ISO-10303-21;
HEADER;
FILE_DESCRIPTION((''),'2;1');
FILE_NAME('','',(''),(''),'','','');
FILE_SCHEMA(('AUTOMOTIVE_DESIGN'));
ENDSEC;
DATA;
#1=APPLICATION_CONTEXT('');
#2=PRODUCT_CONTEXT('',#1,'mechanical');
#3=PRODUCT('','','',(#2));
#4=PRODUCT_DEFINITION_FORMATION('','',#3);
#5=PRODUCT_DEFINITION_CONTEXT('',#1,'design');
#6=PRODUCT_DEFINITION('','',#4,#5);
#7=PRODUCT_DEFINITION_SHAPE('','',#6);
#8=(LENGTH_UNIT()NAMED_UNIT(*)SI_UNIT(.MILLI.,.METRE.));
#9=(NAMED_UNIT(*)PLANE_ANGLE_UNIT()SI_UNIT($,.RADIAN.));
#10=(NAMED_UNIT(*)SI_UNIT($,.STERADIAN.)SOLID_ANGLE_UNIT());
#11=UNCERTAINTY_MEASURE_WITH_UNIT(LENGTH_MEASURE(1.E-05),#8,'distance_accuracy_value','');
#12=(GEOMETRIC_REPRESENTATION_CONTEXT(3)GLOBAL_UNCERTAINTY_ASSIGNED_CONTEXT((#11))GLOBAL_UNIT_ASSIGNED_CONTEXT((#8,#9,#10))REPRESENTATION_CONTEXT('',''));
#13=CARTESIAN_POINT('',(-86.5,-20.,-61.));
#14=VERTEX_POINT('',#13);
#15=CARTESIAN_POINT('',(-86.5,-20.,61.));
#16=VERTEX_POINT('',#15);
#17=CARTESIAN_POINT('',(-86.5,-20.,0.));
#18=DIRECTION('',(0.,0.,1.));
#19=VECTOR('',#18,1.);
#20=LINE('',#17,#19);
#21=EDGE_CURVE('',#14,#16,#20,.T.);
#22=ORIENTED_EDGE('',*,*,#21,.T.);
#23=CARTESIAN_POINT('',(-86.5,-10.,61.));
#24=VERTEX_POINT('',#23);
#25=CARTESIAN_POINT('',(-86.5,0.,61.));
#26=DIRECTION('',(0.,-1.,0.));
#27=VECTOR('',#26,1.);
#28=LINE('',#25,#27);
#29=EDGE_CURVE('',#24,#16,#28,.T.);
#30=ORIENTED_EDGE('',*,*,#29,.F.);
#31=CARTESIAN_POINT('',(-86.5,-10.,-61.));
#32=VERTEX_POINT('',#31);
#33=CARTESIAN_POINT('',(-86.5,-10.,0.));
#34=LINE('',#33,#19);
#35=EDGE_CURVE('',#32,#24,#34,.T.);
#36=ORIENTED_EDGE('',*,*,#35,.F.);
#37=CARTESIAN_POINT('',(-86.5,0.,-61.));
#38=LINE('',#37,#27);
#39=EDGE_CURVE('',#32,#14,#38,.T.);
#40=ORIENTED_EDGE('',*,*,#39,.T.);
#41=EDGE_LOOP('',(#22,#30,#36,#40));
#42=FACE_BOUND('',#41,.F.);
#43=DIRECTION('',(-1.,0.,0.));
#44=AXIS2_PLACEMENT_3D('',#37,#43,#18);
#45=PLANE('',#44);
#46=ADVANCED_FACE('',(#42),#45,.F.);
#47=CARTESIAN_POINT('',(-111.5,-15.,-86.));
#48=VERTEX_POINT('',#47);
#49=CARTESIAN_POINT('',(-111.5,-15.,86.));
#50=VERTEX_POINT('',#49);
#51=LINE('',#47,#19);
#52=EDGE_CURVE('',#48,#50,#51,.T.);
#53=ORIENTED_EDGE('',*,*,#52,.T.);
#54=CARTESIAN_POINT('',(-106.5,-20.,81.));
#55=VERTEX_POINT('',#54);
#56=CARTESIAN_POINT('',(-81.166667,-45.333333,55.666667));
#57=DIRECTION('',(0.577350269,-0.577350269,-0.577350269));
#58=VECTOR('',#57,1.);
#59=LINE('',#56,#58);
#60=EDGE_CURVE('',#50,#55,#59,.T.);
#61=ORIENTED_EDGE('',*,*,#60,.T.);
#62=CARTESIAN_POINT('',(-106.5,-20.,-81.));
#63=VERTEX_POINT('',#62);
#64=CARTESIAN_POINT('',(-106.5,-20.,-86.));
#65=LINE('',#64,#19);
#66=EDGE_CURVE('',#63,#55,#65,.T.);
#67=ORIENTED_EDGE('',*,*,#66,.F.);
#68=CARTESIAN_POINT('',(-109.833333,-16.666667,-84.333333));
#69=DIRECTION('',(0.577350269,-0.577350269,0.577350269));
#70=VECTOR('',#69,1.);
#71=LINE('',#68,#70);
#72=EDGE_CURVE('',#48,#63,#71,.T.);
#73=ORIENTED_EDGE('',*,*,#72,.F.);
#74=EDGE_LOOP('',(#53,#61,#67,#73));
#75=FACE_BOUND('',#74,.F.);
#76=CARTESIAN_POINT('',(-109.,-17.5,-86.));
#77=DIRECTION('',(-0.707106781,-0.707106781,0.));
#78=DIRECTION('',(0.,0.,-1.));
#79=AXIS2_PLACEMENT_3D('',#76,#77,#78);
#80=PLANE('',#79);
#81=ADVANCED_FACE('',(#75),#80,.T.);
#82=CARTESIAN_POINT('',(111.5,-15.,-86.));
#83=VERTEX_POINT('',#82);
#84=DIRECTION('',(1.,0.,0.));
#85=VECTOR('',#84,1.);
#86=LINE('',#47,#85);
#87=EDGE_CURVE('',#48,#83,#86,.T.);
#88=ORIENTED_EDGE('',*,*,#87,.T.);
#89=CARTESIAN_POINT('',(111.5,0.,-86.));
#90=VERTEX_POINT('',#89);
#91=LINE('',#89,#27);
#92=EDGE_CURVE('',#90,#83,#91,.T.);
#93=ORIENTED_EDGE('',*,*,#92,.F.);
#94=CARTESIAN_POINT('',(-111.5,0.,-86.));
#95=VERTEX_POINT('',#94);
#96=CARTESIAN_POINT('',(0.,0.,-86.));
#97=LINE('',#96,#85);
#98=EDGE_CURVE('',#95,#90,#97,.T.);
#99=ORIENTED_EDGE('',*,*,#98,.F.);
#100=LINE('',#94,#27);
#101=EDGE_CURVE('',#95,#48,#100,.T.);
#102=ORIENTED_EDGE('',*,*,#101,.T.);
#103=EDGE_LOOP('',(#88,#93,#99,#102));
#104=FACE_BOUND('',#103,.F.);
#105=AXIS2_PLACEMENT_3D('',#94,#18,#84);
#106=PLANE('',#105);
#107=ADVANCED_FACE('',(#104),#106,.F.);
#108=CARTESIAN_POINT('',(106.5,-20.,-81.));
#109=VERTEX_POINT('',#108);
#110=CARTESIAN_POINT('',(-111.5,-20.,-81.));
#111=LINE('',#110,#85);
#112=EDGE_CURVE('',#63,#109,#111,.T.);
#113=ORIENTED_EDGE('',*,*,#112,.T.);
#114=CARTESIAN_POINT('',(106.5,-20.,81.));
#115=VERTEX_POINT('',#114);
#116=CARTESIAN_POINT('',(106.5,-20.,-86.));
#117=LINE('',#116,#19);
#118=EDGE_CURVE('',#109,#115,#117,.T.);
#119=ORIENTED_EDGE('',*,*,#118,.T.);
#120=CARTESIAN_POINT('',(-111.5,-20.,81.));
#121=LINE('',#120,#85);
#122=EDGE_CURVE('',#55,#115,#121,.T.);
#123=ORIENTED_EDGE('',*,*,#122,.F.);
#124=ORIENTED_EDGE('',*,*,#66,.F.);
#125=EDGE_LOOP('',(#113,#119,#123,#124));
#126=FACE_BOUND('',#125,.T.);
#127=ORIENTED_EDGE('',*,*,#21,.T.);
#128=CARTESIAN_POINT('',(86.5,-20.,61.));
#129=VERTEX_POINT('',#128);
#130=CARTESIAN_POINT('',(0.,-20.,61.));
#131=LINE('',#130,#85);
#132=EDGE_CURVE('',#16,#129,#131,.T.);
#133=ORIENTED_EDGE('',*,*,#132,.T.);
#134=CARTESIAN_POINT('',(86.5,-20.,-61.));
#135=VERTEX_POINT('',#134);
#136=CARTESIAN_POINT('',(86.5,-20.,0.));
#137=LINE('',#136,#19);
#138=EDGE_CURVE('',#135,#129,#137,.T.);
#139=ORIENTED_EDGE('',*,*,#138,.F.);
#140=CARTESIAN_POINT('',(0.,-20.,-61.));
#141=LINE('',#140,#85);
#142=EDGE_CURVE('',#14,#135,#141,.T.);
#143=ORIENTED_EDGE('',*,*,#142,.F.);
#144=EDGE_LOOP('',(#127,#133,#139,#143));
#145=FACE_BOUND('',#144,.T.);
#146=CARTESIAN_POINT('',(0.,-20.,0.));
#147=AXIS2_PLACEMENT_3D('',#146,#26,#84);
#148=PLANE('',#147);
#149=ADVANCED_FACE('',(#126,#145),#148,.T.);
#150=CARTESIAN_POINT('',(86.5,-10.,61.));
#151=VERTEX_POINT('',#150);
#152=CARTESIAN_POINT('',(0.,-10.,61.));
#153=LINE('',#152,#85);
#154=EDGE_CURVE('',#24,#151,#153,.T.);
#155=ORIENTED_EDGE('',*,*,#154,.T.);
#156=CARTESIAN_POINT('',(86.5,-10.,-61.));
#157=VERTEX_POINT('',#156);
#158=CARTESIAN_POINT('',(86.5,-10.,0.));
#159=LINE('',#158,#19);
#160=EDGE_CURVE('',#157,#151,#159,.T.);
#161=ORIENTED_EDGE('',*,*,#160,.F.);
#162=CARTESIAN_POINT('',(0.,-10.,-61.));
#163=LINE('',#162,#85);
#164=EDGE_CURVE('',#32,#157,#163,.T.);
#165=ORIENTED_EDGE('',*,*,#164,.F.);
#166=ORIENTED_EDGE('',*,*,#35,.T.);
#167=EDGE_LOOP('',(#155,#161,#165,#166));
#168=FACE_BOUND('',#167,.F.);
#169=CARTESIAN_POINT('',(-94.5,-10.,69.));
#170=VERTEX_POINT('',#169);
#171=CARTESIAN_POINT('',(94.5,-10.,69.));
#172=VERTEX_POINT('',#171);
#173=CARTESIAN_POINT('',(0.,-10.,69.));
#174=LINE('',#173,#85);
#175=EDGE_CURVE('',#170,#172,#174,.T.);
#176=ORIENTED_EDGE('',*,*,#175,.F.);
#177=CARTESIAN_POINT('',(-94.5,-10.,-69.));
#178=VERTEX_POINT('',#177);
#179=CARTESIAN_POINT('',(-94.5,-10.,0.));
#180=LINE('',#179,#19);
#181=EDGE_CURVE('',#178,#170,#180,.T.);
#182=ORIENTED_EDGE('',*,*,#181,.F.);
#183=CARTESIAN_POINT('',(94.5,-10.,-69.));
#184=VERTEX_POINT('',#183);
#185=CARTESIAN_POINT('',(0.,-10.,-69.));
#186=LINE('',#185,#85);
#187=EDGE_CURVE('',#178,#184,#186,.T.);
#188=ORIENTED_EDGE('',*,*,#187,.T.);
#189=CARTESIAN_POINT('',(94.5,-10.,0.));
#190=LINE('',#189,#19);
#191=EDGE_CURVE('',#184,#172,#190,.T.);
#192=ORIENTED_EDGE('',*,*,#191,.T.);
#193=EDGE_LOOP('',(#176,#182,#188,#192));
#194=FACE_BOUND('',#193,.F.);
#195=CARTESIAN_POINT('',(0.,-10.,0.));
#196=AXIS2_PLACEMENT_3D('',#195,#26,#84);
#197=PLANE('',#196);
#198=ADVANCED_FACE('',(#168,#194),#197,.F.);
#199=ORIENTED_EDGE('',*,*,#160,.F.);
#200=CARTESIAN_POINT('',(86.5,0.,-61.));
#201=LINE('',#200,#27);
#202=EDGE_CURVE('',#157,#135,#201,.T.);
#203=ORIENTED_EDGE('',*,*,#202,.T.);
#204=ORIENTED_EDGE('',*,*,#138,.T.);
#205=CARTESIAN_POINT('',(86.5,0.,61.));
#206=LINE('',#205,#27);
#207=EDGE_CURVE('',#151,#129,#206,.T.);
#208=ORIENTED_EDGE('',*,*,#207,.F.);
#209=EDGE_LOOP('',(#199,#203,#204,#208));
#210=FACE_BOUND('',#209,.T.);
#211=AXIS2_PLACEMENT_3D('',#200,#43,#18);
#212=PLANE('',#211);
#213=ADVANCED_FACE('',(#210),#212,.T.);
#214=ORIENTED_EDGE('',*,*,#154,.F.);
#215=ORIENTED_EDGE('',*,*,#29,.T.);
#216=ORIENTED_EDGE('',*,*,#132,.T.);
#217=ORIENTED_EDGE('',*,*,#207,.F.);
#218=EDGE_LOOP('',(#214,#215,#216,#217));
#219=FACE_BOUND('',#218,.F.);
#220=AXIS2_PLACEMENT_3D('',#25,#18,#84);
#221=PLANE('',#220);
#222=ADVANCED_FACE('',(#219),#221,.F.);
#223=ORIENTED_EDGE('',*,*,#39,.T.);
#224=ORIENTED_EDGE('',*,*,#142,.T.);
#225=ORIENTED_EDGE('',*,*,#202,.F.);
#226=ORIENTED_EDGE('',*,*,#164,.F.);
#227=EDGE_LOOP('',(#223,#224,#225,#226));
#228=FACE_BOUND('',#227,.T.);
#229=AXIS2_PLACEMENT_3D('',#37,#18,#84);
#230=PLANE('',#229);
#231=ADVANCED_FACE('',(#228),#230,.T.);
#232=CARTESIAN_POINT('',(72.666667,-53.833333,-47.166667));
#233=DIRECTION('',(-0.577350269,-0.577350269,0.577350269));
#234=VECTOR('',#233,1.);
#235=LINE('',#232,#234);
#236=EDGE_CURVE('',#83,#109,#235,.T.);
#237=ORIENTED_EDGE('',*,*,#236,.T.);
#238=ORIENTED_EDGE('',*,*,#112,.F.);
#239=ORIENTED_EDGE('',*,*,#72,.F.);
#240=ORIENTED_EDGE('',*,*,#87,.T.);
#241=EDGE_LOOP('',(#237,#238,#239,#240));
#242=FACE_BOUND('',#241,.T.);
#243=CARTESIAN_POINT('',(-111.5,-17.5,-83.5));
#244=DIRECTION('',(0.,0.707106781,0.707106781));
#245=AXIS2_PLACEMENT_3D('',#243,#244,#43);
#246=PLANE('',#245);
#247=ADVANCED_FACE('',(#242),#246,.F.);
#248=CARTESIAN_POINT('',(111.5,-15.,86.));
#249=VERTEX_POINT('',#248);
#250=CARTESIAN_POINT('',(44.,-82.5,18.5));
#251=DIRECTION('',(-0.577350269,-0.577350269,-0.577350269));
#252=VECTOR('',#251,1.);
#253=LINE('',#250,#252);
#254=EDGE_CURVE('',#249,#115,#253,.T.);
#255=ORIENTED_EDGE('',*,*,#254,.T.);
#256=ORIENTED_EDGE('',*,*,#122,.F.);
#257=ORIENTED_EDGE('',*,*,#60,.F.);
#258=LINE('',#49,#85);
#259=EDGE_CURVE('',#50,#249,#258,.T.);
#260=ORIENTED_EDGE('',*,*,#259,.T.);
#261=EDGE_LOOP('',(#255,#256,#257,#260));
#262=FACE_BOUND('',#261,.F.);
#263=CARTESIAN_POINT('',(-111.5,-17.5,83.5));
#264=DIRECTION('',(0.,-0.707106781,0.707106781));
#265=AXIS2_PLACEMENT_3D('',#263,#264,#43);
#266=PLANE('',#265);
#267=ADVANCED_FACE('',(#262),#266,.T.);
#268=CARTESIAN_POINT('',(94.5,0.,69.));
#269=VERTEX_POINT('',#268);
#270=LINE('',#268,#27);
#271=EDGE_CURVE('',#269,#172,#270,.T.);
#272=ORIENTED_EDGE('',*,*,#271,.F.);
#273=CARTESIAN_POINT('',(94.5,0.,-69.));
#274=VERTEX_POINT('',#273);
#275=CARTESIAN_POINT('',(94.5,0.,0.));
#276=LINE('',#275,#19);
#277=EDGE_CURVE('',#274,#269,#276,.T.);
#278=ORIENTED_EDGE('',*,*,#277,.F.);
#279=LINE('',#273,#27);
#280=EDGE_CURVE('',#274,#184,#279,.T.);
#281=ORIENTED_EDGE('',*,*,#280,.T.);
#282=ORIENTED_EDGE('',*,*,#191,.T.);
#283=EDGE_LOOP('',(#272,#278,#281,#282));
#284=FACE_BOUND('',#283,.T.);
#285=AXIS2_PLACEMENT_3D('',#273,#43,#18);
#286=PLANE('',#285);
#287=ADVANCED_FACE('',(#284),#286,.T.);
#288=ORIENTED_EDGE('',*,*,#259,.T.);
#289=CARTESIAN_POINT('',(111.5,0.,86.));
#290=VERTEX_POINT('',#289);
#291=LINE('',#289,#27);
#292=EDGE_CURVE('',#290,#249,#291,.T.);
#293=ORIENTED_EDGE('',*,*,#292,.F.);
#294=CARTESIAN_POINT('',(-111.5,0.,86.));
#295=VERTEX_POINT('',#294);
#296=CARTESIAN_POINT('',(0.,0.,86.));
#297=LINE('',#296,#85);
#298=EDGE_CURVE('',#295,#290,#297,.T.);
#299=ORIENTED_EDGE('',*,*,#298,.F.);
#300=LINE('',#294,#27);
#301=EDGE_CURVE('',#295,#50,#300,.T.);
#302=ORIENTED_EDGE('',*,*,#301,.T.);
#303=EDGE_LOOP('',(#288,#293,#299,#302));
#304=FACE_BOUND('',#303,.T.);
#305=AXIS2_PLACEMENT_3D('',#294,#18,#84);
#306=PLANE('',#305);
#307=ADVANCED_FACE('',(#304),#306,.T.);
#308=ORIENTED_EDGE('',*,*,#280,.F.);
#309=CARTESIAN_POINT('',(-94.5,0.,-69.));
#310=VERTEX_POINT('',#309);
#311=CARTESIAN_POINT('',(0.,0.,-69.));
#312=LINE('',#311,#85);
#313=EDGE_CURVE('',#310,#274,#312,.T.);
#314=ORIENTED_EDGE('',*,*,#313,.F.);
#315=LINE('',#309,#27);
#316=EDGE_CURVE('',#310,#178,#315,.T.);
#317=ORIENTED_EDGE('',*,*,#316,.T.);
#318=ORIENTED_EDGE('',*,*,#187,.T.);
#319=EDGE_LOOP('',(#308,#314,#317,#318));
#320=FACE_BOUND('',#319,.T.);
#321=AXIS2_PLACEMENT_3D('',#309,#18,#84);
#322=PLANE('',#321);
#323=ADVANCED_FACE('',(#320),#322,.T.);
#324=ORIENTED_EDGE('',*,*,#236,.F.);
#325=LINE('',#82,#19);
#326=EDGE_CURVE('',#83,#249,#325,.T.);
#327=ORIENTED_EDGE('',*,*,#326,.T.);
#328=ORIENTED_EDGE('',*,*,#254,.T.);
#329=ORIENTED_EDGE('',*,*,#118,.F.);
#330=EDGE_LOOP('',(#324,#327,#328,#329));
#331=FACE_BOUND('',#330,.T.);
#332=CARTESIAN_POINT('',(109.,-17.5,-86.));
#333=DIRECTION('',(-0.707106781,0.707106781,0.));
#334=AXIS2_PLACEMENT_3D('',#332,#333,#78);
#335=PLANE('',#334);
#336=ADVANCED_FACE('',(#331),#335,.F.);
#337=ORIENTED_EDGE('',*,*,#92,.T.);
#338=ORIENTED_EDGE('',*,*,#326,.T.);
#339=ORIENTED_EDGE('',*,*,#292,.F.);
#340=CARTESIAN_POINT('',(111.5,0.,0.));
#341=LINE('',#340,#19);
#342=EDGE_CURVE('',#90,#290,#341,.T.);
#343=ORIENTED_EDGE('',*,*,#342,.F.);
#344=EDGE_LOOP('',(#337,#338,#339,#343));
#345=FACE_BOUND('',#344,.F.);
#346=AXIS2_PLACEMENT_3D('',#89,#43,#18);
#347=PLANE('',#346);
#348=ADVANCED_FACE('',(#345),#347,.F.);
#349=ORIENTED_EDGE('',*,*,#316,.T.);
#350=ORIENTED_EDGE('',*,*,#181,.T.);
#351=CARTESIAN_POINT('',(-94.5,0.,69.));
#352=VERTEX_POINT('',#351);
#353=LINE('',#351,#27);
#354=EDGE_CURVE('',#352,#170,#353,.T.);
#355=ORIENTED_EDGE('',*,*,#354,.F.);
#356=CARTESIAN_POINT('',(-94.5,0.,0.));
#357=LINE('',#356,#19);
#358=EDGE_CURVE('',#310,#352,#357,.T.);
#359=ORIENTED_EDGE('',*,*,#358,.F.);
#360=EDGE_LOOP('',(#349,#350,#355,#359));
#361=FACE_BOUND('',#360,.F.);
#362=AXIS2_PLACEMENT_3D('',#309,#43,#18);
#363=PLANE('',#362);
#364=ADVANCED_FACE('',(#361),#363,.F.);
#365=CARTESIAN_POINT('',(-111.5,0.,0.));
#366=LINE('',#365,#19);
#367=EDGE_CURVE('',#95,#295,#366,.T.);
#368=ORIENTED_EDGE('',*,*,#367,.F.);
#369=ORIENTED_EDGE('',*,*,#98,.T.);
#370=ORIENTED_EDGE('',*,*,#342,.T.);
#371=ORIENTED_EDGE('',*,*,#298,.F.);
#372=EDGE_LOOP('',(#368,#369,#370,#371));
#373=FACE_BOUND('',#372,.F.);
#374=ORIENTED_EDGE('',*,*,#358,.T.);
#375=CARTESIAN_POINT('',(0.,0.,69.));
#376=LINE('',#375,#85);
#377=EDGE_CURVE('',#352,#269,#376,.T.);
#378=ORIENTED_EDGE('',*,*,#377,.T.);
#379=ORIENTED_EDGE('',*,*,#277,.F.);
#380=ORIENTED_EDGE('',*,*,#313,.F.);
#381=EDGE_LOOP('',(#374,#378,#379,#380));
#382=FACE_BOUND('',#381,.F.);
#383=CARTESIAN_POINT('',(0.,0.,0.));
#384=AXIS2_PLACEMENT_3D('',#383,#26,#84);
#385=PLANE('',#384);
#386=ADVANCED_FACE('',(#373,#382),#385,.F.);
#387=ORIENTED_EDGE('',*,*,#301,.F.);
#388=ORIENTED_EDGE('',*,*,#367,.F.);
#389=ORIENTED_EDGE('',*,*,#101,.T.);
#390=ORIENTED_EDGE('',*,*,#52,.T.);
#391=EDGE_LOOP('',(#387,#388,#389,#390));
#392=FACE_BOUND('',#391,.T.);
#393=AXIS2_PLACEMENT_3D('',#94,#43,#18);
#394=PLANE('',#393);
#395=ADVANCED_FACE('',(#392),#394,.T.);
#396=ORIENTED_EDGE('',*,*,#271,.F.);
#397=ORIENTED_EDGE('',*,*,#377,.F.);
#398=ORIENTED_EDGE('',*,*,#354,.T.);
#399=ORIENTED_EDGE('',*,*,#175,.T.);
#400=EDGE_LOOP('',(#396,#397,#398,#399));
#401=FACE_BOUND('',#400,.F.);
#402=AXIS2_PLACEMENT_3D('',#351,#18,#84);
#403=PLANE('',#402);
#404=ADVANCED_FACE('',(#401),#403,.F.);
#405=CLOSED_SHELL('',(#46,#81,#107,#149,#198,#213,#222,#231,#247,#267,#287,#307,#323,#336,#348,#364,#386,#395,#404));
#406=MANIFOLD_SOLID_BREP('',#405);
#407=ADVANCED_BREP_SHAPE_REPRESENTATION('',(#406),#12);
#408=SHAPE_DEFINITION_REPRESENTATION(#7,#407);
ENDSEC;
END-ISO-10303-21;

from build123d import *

# Parameters (mm, degrees)
F0_W     = 223
F0_H     = 172
F0_W_2   = 189
F0_H_2   = 138
F0_W_3   = 173
F0_H_3   = 122
F1_DEPTH = 20
F2_SIZE  = 5
F3_DEPTH = 10


# Not quite as in the source:
# - a feature names something its author has since deleted; it is built from what else it names


with BuildPart() as f1:
    # F0 (on Front) → F1 (new body)
    with BuildSketch(Plane.XZ):
        Rectangle(F0_W, F0_H)
        Rectangle(F0_W_2, F0_H_2, mode=Mode.SUBTRACT)
        Rectangle(F0_W_2, F0_H_2)
        Rectangle(F0_W_3, F0_H_3, mode=Mode.SUBTRACT)
    extrude(amount=F1_DEPTH)

    # F2
    f2_edges = [f1.edges().sort_by_distance(p)[0] for p in [
        (-111.5, -20, 0),
        (0, -20, 86),
        (111.5, -20, 0),
        (0, -20, -86),
    ]]
    chamfer(f2_edges, length=F2_SIZE)

    # F0 (on Front) → F3 (cut)
    with BuildSketch(Plane.XZ):
        Rectangle(F0_W_2, F0_H_2)
        Rectangle(F0_W_3, F0_H_3, mode=Mode.SUBTRACT)
    extrude(amount=F3_DEPTH, mode=Mode.SUBTRACT)


solid = f1.part
